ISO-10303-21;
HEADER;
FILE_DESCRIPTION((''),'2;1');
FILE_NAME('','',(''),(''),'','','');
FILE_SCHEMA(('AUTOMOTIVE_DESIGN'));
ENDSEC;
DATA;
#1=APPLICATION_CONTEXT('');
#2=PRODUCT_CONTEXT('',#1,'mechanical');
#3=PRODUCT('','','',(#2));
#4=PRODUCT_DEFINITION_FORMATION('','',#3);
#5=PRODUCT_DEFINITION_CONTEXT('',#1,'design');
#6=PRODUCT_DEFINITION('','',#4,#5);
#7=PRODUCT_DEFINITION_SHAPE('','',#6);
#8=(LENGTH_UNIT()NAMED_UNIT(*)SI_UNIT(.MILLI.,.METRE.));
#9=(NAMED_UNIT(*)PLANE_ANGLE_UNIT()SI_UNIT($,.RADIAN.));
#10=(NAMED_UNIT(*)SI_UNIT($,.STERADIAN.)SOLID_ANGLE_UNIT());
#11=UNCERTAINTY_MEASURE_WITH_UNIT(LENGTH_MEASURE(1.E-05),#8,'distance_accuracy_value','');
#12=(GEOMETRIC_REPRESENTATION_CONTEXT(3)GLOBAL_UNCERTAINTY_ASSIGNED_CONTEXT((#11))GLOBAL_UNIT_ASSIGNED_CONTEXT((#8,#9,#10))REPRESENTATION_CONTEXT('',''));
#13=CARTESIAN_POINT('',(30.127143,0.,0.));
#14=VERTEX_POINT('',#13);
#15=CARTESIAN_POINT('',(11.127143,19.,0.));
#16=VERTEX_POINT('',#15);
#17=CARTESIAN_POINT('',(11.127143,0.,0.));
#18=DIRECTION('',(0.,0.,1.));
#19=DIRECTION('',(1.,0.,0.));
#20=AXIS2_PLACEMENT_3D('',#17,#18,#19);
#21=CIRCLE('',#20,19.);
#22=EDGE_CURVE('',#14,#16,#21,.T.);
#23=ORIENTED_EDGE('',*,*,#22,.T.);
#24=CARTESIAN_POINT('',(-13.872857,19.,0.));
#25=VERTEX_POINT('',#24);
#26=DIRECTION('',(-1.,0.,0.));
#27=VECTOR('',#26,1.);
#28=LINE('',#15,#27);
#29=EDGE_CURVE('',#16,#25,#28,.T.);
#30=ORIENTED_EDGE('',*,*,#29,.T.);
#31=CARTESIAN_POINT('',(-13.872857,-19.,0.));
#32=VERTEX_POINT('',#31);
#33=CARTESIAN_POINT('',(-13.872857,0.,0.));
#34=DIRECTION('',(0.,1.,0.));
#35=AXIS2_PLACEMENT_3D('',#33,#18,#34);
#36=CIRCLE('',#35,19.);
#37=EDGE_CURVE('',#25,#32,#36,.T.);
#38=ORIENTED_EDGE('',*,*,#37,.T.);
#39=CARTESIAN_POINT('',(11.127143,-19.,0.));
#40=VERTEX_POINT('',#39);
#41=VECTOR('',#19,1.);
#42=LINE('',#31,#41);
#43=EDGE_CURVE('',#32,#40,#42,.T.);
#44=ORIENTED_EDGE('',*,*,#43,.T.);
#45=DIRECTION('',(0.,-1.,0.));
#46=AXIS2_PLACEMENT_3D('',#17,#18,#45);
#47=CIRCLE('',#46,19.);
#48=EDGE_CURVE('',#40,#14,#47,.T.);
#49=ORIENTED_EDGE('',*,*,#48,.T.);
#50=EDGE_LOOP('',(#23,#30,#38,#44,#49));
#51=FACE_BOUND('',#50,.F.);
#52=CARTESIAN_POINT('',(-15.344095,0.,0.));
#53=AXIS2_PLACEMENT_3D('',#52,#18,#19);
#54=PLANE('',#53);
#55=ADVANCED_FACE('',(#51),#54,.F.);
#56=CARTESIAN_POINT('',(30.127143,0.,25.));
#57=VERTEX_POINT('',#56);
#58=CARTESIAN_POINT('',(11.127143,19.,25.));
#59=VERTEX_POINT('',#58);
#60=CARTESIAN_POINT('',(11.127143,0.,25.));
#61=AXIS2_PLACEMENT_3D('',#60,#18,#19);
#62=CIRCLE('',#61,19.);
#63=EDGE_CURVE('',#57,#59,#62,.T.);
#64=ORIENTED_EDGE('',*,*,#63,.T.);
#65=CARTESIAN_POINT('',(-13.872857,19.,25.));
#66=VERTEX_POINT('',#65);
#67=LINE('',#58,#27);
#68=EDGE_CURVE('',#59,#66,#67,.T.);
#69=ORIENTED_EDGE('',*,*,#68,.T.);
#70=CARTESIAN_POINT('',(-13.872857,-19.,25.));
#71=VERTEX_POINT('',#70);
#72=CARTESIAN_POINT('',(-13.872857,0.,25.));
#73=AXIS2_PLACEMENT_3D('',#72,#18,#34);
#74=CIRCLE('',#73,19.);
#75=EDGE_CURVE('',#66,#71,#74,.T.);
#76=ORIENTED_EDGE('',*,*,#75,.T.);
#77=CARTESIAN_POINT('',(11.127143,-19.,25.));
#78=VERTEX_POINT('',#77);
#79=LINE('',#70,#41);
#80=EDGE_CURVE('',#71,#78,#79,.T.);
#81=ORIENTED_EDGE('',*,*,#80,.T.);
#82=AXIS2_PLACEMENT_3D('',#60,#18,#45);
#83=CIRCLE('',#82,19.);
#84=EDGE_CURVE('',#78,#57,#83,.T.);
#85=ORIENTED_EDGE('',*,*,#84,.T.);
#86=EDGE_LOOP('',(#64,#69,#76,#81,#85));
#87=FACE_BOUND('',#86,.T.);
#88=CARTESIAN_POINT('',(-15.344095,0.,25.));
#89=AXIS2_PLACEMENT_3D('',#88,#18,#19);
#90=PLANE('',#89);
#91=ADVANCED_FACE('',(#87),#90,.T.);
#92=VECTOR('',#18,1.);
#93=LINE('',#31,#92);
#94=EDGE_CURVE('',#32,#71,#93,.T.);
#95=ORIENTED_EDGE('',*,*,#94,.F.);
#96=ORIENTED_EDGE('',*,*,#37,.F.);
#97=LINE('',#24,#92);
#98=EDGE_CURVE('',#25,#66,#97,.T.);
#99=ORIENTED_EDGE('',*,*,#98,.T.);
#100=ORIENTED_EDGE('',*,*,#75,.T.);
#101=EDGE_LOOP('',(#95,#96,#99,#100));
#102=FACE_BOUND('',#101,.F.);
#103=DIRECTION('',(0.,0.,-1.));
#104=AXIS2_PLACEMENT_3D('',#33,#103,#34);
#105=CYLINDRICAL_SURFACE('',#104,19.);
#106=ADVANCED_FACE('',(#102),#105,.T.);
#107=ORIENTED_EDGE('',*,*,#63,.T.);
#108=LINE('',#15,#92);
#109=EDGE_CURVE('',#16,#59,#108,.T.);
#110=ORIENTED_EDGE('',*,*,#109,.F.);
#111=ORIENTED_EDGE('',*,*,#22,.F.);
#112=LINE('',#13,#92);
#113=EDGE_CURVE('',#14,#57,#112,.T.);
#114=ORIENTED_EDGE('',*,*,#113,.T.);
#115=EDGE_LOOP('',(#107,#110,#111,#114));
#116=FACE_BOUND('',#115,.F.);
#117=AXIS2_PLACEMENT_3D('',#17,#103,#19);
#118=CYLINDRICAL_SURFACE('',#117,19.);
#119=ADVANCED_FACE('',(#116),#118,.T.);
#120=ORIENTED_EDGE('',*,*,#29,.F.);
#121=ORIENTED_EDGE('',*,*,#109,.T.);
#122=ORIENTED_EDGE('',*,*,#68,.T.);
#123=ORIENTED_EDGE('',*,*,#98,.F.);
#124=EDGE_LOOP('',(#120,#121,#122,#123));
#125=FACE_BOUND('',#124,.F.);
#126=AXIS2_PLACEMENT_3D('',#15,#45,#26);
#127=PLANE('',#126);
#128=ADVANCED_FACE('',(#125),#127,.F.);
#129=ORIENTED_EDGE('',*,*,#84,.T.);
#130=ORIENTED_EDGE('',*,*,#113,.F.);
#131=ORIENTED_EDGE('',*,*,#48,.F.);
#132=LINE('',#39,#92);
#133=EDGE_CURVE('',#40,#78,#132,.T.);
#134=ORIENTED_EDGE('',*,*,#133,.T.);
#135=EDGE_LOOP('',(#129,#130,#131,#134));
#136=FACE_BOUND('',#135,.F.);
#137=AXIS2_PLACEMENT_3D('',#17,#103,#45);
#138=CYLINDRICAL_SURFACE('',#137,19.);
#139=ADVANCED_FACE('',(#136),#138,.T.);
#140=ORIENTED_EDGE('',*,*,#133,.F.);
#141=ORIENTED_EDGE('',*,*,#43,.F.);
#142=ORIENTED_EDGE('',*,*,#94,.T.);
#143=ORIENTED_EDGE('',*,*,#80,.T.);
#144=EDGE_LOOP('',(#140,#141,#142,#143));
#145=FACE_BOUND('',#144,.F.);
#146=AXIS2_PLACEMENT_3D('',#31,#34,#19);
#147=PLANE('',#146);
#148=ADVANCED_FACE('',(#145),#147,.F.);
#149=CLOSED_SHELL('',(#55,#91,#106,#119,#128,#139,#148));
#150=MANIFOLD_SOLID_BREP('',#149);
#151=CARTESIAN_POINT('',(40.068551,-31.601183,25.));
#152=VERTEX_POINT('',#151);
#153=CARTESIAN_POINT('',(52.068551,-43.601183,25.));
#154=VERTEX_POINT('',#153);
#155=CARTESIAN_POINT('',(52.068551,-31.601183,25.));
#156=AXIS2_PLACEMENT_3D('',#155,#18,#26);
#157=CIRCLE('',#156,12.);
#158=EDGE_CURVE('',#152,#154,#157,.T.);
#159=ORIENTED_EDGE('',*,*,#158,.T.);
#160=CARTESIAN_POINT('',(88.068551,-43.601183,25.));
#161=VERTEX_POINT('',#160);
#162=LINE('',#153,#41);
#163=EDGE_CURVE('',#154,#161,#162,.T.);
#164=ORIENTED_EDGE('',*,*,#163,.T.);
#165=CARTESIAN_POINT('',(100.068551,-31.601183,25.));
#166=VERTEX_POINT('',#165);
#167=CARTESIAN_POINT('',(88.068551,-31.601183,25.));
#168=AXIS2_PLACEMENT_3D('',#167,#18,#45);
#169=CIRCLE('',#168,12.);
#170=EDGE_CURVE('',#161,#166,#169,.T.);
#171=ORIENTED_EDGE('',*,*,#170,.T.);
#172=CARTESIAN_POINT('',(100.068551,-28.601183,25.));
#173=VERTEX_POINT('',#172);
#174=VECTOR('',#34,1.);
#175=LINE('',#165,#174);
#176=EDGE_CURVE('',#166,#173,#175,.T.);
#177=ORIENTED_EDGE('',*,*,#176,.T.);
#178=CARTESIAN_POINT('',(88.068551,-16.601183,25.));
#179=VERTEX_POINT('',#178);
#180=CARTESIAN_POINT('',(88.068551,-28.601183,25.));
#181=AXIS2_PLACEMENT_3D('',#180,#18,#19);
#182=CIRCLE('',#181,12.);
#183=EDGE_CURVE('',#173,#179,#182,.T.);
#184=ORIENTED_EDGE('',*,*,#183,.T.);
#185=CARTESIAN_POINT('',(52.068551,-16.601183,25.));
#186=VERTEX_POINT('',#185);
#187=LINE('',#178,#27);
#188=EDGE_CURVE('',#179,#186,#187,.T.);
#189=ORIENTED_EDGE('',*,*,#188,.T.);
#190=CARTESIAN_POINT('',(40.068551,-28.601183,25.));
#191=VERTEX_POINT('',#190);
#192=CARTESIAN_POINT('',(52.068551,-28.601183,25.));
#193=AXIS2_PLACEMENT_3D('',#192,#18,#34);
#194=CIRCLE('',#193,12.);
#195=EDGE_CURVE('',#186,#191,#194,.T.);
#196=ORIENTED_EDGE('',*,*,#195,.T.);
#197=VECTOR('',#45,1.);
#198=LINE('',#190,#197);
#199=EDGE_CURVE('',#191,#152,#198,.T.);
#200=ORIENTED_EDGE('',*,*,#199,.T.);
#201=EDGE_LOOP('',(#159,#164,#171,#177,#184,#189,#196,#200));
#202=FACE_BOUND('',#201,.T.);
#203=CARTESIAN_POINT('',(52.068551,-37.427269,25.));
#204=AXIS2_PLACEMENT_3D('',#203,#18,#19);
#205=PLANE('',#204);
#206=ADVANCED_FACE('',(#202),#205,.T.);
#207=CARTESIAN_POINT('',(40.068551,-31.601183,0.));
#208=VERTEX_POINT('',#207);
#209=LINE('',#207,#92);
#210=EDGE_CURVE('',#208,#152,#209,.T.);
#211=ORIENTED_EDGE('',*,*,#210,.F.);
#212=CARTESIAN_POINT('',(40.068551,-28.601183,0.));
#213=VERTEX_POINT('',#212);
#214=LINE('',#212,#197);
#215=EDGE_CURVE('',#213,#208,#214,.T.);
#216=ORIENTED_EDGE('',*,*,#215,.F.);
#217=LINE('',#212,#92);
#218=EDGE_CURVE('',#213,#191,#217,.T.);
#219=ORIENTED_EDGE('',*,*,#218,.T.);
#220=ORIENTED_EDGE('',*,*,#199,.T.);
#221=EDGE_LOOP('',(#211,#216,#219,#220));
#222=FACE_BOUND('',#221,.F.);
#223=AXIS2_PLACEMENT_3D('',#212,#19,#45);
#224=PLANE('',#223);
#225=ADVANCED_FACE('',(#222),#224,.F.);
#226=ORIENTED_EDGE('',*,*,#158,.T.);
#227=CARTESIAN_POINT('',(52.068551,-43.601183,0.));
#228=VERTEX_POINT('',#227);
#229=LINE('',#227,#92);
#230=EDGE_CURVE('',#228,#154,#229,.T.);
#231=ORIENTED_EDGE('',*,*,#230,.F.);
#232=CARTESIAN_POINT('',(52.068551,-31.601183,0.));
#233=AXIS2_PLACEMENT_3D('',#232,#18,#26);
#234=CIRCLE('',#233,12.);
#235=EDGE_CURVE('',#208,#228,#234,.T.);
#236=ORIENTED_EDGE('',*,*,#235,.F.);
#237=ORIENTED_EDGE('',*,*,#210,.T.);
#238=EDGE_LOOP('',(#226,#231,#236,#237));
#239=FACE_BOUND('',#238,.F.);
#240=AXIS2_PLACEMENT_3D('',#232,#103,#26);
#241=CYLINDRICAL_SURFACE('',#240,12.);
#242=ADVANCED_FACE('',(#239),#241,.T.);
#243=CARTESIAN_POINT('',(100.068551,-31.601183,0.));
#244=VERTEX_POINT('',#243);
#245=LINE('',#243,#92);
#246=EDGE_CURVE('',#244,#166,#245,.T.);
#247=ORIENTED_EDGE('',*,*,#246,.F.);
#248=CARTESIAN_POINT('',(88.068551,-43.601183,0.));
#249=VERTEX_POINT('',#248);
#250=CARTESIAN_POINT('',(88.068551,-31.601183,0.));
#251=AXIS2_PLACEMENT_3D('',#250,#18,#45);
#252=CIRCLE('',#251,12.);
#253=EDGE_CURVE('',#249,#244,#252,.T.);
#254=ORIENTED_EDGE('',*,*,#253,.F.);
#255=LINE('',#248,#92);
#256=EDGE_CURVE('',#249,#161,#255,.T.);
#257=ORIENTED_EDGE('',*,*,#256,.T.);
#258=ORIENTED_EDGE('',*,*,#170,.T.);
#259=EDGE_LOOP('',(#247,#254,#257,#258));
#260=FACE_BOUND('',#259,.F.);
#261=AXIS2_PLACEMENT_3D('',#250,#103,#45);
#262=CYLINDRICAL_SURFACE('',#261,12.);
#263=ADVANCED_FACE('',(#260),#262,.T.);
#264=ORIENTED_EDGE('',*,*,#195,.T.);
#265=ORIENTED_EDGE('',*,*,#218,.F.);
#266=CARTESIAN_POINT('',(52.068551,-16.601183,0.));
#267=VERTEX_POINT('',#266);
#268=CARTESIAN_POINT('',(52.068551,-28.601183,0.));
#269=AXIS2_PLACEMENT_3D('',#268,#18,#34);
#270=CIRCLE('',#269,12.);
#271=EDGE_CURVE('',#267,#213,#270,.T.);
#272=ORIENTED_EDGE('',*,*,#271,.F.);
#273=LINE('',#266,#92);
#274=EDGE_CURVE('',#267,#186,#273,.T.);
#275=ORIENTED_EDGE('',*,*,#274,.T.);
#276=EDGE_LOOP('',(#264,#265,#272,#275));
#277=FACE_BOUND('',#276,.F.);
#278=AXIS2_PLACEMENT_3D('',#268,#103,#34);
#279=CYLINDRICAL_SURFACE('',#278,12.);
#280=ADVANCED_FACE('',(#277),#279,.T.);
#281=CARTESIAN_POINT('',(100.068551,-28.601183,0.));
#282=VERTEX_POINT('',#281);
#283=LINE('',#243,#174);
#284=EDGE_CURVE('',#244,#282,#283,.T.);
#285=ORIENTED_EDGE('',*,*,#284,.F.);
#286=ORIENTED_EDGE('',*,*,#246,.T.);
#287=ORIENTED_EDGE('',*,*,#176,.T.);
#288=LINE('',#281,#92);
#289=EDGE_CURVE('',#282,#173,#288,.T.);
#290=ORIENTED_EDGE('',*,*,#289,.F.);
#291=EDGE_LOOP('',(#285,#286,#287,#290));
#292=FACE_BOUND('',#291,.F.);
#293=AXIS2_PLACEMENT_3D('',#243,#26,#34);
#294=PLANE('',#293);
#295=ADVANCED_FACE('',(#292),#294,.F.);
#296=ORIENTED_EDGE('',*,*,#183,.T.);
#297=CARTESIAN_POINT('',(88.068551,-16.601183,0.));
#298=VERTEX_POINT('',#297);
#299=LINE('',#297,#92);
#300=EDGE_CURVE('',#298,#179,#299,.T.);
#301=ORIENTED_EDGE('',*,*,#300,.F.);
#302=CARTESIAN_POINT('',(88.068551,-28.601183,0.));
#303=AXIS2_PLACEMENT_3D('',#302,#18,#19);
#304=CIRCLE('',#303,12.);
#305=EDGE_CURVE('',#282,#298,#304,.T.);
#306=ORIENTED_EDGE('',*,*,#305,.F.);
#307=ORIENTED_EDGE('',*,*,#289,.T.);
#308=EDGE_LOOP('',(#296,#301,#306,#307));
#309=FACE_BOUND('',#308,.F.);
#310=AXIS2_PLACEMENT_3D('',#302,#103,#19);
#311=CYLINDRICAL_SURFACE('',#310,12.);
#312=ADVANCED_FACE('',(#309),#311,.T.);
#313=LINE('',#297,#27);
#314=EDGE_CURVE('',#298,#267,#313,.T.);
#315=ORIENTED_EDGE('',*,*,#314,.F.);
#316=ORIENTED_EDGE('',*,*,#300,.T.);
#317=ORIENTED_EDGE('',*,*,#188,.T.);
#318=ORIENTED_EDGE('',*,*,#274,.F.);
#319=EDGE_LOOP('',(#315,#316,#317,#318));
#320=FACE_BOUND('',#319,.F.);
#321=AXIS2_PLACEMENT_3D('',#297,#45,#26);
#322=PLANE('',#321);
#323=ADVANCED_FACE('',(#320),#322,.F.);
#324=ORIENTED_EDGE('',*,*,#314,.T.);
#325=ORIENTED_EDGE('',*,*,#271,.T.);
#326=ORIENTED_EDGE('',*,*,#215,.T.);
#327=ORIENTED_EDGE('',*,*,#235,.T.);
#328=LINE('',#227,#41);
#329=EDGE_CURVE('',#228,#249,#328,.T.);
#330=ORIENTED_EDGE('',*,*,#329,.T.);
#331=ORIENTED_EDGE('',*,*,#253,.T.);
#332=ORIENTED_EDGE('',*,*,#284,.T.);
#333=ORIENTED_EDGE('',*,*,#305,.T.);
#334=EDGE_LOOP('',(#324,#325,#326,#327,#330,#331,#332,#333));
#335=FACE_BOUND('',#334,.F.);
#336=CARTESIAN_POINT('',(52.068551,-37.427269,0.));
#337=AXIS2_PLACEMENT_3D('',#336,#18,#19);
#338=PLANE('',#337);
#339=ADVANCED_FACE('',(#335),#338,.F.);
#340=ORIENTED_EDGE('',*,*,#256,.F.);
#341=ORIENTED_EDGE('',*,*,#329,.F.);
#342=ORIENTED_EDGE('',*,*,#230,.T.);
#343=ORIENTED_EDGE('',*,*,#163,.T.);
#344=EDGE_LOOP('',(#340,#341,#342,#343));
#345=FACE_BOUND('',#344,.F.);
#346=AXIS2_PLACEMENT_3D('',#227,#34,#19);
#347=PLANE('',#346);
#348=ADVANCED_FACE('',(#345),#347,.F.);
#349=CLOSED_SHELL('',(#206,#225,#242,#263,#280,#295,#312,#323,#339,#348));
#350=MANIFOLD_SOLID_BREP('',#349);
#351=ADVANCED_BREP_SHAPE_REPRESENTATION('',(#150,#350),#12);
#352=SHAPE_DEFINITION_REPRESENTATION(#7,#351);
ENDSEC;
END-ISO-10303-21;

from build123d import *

# Parameters (mm, degrees)
F1_DEPTH = 25
F3_DEPTH = 25


with BuildPart() as f1:
    # F0 (on Top) → F1 (new body)
    with BuildSketch(Plane.XY):
        with BuildLine():
            ThreePointArc((-1.3728568151, 14.3090880213), (-7.1972546851, 17.7886575154), (-13.8728568151, 19))
            ThreePointArc((-13.8728568151, 19), (-32.8728568151, 0), (-13.8728568151, -19))
            ThreePointArc((-13.8728568151, -19), (-7.1972546851, -17.7886575154), (-1.3728568151, -14.3090880213))
            ThreePointArc((-1.3728568151, -14.3090880213), (-7.8728568151, 0), (-1.3728568151, 14.3090880213))
        make_face()
        with BuildLine():
            Line((11.1271431849, 19), (-13.8728568151, 19))
            ThreePointArc((-13.8728568151, 19), (-7.1972546851, 17.7886575154), (-1.3728568151, 14.3090880213))
            ThreePointArc((-1.3728568151, 14.3090880213), (4.4515410549, 17.7886575154), (11.1271431849, 19))
        make_face()
        with BuildLine():
            ThreePointArc((-1.3728568151, -14.3090880213), (-7.1972546851, -17.7886575154), (-13.8728568151, -19))
            Line((-13.8728568151, -19), (11.1271431849, -19))
            ThreePointArc((11.1271431849, -19), (4.4515410549, -17.7886575154), (-1.3728568151, -14.3090880213))
        make_face()
        with BuildLine():
            ThreePointArc((11.1271431849, 19), (4.4515410549, 17.7886575154), (-1.3728568151, 14.3090880213))
            ThreePointArc((-1.3728568151, 14.3090880213), (3.4259870769, 7.8581168228), (5.1271431849, 0))
            ThreePointArc((5.1271431849, 0), (3.4259870769, -7.8581168228), (-1.3728568151, -14.3090880213))
            ThreePointArc((-1.3728568151, -14.3090880213), (4.4515410549, -17.7886575154), (11.1271431849, -19))
            ThreePointArc((11.1271431849, -19), (24.5621720274, -13.4350288425), (30.1271431849, 0))
            ThreePointArc((30.1271431849, 0), (24.5621720274, 13.4350288425), (11.1271431849, 19))
        make_face()
        with BuildLine():
            ThreePointArc((5.1271431849, 0), (3.4259870769, 7.8581168228), (-1.3728568151, 14.3090880213))
            ThreePointArc((-1.3728568151, 14.3090880213), (-7.8728568151, 0), (-1.3728568151, -14.3090880213))
            ThreePointArc((-1.3728568151, -14.3090880213), (3.4259870769, -7.8581168228), (5.1271431849, 0))
        make_face()
    extrude(amount=F1_DEPTH)


with BuildPart() as f3:
    # F2 (on Top) → F3 (new body)
    with BuildSketch(Plane.XY):
        with BuildLine():
            ThreePointArc((40.1626702507, -30.1011827665), (40.0921040397, -30.849707816), (40.0685511505, -31.6011827665))
            ThreePointArc((40.0685511505, -31.6011827665), (43.5832697763, -40.0864641407), (52.0685511505, -43.6011827665))
            ThreePointArc((52.0685511505, -43.6011827665), (60.5538325247, -40.0864641407), (64.0685511505, -31.6011827665))
            ThreePointArc((64.0685511505, -31.6011827665), (64.0449982613, -30.849707816), (63.9744320503, -30.1011827665))
            ThreePointArc((63.9744320503, -30.1011827665), (52.0685511505, -40.6011827665), (40.1626702507, -30.1011827665))
        make_face()
        with BuildLine():
            Line((40.0685511505, -28.6011827665), (40.0685511505, -31.6011827665))
            ThreePointArc((40.0685511505, -31.6011827665), (40.0921040397, -30.849707816), (40.1626702507, -30.1011827665))
            ThreePointArc((40.1626702507, -30.1011827665), (40.0921040397, -29.352657717), (40.0685511505, -28.6011827665))
        make_face()
        with BuildLine():
            ThreePointArc((64.0685511505, -31.6011827665), (60.5538325247, -40.0864641407), (52.0685511505, -43.6011827665))
            Line((52.0685511505, -43.6011827665), (88.0685511505, -43.6011827665))
            ThreePointArc((88.0685511505, -43.6011827665), (79.0685511505, -39.5384366997), (76.1626702507, -30.1011827665))
            ThreePointArc((76.1626702507, -30.1011827665), (79.0685511505, -20.6639288333), (88.0685511505, -16.6011827665))
            Line((88.0685511505, -16.6011827665), (52.0685511505, -16.6011827665))
            ThreePointArc((52.0685511505, -16.6011827665), (60.5538325247, -20.1159013923), (64.0685511505, -28.6011827665))
            ThreePointArc((64.0685511505, -28.6011827665), (64.0449982613, -29.352657717), (63.9744320503, -30.1011827665))
            ThreePointArc((63.9744320503, -30.1011827665), (64.0449982613, -30.849707816), (64.0685511505, -31.6011827665))
        make_face()
        with BuildLine():
            ThreePointArc((40.0685511505, -28.6011827665), (40.0921040397, -29.352657717), (40.1626702507, -30.1011827665))
            ThreePointArc((40.1626702507, -30.1011827665), (52.0685511505, -19.6011827665), (63.9744320503, -30.1011827665))
            ThreePointArc((63.9744320503, -30.1011827665), (64.0449982613, -29.352657717), (64.0685511505, -28.6011827665))
            ThreePointArc((64.0685511505, -28.6011827665), (60.5538325247, -20.1159013923), (52.0685511505, -16.6011827665))
            ThreePointArc((52.0685511505, -16.6011827665), (43.5832697763, -20.1159013923), (40.0685511505, -28.6011827665))
        make_face()
        with BuildLine():
            ThreePointArc((63.9744320503, -30.1011827665), (52.0685511505, -19.6011827665), (40.1626702507, -30.1011827665))
            ThreePointArc((40.1626702507, -30.1011827665), (52.0685511505, -40.6011827665), (63.9744320503, -30.1011827665))
        make_face()
        with BuildLine():
            ThreePointArc((76.1626702507, -30.1011827665), (79.0685511505, -39.5384366997), (88.0685511505, -43.6011827665))
            ThreePointArc((88.0685511505, -43.6011827665), (96.5538325247, -40.0864641407), (100.0685511505, -31.6011827665))
            ThreePointArc((100.0685511505, -31.6011827665), (100.0449982613, -30.849707816), (99.9744320503, -30.1011827665))
            ThreePointArc((99.9744320503, -30.1011827665), (88.0685511505, -40.6011827665), (76.1626702507, -30.1011827665))
        make_face()
        with BuildLine():
            ThreePointArc((99.9744320503, -30.1011827665), (100.0449982613, -30.849707816), (100.0685511505, -31.6011827665))
            Line((100.0685511505, -31.6011827665), (100.0685511505, -28.6011827665))
            ThreePointArc((100.0685511505, -28.6011827665), (100.0449982613, -29.352657717), (99.9744320503, -30.1011827665))
        make_face()
        with BuildLine():
            ThreePointArc((99.9744320503, -30.1011827665), (88.0685511505, -19.6011827665), (76.1626702507, -30.1011827665))
            ThreePointArc((76.1626702507, -30.1011827665), (88.0685511505, -40.6011827665), (99.9744320503, -30.1011827665))
        make_face()
        with BuildLine():
            ThreePointArc((88.0685511505, -16.6011827665), (79.0685511505, -20.6639288333), (76.1626702507, -30.1011827665))
            ThreePointArc((76.1626702507, -30.1011827665), (88.0685511505, -19.6011827665), (99.9744320503, -30.1011827665))
            ThreePointArc((99.9744320503, -30.1011827665), (100.0449982613, -29.352657717), (100.0685511505, -28.6011827665))
            ThreePointArc((100.0685511505, -28.6011827665), (96.5538325247, -20.1159013923), (88.0685511505, -16.6011827665))
        make_face()
    extrude(amount=F3_DEPTH)


solid = Compound([f1.part, f3.part])
